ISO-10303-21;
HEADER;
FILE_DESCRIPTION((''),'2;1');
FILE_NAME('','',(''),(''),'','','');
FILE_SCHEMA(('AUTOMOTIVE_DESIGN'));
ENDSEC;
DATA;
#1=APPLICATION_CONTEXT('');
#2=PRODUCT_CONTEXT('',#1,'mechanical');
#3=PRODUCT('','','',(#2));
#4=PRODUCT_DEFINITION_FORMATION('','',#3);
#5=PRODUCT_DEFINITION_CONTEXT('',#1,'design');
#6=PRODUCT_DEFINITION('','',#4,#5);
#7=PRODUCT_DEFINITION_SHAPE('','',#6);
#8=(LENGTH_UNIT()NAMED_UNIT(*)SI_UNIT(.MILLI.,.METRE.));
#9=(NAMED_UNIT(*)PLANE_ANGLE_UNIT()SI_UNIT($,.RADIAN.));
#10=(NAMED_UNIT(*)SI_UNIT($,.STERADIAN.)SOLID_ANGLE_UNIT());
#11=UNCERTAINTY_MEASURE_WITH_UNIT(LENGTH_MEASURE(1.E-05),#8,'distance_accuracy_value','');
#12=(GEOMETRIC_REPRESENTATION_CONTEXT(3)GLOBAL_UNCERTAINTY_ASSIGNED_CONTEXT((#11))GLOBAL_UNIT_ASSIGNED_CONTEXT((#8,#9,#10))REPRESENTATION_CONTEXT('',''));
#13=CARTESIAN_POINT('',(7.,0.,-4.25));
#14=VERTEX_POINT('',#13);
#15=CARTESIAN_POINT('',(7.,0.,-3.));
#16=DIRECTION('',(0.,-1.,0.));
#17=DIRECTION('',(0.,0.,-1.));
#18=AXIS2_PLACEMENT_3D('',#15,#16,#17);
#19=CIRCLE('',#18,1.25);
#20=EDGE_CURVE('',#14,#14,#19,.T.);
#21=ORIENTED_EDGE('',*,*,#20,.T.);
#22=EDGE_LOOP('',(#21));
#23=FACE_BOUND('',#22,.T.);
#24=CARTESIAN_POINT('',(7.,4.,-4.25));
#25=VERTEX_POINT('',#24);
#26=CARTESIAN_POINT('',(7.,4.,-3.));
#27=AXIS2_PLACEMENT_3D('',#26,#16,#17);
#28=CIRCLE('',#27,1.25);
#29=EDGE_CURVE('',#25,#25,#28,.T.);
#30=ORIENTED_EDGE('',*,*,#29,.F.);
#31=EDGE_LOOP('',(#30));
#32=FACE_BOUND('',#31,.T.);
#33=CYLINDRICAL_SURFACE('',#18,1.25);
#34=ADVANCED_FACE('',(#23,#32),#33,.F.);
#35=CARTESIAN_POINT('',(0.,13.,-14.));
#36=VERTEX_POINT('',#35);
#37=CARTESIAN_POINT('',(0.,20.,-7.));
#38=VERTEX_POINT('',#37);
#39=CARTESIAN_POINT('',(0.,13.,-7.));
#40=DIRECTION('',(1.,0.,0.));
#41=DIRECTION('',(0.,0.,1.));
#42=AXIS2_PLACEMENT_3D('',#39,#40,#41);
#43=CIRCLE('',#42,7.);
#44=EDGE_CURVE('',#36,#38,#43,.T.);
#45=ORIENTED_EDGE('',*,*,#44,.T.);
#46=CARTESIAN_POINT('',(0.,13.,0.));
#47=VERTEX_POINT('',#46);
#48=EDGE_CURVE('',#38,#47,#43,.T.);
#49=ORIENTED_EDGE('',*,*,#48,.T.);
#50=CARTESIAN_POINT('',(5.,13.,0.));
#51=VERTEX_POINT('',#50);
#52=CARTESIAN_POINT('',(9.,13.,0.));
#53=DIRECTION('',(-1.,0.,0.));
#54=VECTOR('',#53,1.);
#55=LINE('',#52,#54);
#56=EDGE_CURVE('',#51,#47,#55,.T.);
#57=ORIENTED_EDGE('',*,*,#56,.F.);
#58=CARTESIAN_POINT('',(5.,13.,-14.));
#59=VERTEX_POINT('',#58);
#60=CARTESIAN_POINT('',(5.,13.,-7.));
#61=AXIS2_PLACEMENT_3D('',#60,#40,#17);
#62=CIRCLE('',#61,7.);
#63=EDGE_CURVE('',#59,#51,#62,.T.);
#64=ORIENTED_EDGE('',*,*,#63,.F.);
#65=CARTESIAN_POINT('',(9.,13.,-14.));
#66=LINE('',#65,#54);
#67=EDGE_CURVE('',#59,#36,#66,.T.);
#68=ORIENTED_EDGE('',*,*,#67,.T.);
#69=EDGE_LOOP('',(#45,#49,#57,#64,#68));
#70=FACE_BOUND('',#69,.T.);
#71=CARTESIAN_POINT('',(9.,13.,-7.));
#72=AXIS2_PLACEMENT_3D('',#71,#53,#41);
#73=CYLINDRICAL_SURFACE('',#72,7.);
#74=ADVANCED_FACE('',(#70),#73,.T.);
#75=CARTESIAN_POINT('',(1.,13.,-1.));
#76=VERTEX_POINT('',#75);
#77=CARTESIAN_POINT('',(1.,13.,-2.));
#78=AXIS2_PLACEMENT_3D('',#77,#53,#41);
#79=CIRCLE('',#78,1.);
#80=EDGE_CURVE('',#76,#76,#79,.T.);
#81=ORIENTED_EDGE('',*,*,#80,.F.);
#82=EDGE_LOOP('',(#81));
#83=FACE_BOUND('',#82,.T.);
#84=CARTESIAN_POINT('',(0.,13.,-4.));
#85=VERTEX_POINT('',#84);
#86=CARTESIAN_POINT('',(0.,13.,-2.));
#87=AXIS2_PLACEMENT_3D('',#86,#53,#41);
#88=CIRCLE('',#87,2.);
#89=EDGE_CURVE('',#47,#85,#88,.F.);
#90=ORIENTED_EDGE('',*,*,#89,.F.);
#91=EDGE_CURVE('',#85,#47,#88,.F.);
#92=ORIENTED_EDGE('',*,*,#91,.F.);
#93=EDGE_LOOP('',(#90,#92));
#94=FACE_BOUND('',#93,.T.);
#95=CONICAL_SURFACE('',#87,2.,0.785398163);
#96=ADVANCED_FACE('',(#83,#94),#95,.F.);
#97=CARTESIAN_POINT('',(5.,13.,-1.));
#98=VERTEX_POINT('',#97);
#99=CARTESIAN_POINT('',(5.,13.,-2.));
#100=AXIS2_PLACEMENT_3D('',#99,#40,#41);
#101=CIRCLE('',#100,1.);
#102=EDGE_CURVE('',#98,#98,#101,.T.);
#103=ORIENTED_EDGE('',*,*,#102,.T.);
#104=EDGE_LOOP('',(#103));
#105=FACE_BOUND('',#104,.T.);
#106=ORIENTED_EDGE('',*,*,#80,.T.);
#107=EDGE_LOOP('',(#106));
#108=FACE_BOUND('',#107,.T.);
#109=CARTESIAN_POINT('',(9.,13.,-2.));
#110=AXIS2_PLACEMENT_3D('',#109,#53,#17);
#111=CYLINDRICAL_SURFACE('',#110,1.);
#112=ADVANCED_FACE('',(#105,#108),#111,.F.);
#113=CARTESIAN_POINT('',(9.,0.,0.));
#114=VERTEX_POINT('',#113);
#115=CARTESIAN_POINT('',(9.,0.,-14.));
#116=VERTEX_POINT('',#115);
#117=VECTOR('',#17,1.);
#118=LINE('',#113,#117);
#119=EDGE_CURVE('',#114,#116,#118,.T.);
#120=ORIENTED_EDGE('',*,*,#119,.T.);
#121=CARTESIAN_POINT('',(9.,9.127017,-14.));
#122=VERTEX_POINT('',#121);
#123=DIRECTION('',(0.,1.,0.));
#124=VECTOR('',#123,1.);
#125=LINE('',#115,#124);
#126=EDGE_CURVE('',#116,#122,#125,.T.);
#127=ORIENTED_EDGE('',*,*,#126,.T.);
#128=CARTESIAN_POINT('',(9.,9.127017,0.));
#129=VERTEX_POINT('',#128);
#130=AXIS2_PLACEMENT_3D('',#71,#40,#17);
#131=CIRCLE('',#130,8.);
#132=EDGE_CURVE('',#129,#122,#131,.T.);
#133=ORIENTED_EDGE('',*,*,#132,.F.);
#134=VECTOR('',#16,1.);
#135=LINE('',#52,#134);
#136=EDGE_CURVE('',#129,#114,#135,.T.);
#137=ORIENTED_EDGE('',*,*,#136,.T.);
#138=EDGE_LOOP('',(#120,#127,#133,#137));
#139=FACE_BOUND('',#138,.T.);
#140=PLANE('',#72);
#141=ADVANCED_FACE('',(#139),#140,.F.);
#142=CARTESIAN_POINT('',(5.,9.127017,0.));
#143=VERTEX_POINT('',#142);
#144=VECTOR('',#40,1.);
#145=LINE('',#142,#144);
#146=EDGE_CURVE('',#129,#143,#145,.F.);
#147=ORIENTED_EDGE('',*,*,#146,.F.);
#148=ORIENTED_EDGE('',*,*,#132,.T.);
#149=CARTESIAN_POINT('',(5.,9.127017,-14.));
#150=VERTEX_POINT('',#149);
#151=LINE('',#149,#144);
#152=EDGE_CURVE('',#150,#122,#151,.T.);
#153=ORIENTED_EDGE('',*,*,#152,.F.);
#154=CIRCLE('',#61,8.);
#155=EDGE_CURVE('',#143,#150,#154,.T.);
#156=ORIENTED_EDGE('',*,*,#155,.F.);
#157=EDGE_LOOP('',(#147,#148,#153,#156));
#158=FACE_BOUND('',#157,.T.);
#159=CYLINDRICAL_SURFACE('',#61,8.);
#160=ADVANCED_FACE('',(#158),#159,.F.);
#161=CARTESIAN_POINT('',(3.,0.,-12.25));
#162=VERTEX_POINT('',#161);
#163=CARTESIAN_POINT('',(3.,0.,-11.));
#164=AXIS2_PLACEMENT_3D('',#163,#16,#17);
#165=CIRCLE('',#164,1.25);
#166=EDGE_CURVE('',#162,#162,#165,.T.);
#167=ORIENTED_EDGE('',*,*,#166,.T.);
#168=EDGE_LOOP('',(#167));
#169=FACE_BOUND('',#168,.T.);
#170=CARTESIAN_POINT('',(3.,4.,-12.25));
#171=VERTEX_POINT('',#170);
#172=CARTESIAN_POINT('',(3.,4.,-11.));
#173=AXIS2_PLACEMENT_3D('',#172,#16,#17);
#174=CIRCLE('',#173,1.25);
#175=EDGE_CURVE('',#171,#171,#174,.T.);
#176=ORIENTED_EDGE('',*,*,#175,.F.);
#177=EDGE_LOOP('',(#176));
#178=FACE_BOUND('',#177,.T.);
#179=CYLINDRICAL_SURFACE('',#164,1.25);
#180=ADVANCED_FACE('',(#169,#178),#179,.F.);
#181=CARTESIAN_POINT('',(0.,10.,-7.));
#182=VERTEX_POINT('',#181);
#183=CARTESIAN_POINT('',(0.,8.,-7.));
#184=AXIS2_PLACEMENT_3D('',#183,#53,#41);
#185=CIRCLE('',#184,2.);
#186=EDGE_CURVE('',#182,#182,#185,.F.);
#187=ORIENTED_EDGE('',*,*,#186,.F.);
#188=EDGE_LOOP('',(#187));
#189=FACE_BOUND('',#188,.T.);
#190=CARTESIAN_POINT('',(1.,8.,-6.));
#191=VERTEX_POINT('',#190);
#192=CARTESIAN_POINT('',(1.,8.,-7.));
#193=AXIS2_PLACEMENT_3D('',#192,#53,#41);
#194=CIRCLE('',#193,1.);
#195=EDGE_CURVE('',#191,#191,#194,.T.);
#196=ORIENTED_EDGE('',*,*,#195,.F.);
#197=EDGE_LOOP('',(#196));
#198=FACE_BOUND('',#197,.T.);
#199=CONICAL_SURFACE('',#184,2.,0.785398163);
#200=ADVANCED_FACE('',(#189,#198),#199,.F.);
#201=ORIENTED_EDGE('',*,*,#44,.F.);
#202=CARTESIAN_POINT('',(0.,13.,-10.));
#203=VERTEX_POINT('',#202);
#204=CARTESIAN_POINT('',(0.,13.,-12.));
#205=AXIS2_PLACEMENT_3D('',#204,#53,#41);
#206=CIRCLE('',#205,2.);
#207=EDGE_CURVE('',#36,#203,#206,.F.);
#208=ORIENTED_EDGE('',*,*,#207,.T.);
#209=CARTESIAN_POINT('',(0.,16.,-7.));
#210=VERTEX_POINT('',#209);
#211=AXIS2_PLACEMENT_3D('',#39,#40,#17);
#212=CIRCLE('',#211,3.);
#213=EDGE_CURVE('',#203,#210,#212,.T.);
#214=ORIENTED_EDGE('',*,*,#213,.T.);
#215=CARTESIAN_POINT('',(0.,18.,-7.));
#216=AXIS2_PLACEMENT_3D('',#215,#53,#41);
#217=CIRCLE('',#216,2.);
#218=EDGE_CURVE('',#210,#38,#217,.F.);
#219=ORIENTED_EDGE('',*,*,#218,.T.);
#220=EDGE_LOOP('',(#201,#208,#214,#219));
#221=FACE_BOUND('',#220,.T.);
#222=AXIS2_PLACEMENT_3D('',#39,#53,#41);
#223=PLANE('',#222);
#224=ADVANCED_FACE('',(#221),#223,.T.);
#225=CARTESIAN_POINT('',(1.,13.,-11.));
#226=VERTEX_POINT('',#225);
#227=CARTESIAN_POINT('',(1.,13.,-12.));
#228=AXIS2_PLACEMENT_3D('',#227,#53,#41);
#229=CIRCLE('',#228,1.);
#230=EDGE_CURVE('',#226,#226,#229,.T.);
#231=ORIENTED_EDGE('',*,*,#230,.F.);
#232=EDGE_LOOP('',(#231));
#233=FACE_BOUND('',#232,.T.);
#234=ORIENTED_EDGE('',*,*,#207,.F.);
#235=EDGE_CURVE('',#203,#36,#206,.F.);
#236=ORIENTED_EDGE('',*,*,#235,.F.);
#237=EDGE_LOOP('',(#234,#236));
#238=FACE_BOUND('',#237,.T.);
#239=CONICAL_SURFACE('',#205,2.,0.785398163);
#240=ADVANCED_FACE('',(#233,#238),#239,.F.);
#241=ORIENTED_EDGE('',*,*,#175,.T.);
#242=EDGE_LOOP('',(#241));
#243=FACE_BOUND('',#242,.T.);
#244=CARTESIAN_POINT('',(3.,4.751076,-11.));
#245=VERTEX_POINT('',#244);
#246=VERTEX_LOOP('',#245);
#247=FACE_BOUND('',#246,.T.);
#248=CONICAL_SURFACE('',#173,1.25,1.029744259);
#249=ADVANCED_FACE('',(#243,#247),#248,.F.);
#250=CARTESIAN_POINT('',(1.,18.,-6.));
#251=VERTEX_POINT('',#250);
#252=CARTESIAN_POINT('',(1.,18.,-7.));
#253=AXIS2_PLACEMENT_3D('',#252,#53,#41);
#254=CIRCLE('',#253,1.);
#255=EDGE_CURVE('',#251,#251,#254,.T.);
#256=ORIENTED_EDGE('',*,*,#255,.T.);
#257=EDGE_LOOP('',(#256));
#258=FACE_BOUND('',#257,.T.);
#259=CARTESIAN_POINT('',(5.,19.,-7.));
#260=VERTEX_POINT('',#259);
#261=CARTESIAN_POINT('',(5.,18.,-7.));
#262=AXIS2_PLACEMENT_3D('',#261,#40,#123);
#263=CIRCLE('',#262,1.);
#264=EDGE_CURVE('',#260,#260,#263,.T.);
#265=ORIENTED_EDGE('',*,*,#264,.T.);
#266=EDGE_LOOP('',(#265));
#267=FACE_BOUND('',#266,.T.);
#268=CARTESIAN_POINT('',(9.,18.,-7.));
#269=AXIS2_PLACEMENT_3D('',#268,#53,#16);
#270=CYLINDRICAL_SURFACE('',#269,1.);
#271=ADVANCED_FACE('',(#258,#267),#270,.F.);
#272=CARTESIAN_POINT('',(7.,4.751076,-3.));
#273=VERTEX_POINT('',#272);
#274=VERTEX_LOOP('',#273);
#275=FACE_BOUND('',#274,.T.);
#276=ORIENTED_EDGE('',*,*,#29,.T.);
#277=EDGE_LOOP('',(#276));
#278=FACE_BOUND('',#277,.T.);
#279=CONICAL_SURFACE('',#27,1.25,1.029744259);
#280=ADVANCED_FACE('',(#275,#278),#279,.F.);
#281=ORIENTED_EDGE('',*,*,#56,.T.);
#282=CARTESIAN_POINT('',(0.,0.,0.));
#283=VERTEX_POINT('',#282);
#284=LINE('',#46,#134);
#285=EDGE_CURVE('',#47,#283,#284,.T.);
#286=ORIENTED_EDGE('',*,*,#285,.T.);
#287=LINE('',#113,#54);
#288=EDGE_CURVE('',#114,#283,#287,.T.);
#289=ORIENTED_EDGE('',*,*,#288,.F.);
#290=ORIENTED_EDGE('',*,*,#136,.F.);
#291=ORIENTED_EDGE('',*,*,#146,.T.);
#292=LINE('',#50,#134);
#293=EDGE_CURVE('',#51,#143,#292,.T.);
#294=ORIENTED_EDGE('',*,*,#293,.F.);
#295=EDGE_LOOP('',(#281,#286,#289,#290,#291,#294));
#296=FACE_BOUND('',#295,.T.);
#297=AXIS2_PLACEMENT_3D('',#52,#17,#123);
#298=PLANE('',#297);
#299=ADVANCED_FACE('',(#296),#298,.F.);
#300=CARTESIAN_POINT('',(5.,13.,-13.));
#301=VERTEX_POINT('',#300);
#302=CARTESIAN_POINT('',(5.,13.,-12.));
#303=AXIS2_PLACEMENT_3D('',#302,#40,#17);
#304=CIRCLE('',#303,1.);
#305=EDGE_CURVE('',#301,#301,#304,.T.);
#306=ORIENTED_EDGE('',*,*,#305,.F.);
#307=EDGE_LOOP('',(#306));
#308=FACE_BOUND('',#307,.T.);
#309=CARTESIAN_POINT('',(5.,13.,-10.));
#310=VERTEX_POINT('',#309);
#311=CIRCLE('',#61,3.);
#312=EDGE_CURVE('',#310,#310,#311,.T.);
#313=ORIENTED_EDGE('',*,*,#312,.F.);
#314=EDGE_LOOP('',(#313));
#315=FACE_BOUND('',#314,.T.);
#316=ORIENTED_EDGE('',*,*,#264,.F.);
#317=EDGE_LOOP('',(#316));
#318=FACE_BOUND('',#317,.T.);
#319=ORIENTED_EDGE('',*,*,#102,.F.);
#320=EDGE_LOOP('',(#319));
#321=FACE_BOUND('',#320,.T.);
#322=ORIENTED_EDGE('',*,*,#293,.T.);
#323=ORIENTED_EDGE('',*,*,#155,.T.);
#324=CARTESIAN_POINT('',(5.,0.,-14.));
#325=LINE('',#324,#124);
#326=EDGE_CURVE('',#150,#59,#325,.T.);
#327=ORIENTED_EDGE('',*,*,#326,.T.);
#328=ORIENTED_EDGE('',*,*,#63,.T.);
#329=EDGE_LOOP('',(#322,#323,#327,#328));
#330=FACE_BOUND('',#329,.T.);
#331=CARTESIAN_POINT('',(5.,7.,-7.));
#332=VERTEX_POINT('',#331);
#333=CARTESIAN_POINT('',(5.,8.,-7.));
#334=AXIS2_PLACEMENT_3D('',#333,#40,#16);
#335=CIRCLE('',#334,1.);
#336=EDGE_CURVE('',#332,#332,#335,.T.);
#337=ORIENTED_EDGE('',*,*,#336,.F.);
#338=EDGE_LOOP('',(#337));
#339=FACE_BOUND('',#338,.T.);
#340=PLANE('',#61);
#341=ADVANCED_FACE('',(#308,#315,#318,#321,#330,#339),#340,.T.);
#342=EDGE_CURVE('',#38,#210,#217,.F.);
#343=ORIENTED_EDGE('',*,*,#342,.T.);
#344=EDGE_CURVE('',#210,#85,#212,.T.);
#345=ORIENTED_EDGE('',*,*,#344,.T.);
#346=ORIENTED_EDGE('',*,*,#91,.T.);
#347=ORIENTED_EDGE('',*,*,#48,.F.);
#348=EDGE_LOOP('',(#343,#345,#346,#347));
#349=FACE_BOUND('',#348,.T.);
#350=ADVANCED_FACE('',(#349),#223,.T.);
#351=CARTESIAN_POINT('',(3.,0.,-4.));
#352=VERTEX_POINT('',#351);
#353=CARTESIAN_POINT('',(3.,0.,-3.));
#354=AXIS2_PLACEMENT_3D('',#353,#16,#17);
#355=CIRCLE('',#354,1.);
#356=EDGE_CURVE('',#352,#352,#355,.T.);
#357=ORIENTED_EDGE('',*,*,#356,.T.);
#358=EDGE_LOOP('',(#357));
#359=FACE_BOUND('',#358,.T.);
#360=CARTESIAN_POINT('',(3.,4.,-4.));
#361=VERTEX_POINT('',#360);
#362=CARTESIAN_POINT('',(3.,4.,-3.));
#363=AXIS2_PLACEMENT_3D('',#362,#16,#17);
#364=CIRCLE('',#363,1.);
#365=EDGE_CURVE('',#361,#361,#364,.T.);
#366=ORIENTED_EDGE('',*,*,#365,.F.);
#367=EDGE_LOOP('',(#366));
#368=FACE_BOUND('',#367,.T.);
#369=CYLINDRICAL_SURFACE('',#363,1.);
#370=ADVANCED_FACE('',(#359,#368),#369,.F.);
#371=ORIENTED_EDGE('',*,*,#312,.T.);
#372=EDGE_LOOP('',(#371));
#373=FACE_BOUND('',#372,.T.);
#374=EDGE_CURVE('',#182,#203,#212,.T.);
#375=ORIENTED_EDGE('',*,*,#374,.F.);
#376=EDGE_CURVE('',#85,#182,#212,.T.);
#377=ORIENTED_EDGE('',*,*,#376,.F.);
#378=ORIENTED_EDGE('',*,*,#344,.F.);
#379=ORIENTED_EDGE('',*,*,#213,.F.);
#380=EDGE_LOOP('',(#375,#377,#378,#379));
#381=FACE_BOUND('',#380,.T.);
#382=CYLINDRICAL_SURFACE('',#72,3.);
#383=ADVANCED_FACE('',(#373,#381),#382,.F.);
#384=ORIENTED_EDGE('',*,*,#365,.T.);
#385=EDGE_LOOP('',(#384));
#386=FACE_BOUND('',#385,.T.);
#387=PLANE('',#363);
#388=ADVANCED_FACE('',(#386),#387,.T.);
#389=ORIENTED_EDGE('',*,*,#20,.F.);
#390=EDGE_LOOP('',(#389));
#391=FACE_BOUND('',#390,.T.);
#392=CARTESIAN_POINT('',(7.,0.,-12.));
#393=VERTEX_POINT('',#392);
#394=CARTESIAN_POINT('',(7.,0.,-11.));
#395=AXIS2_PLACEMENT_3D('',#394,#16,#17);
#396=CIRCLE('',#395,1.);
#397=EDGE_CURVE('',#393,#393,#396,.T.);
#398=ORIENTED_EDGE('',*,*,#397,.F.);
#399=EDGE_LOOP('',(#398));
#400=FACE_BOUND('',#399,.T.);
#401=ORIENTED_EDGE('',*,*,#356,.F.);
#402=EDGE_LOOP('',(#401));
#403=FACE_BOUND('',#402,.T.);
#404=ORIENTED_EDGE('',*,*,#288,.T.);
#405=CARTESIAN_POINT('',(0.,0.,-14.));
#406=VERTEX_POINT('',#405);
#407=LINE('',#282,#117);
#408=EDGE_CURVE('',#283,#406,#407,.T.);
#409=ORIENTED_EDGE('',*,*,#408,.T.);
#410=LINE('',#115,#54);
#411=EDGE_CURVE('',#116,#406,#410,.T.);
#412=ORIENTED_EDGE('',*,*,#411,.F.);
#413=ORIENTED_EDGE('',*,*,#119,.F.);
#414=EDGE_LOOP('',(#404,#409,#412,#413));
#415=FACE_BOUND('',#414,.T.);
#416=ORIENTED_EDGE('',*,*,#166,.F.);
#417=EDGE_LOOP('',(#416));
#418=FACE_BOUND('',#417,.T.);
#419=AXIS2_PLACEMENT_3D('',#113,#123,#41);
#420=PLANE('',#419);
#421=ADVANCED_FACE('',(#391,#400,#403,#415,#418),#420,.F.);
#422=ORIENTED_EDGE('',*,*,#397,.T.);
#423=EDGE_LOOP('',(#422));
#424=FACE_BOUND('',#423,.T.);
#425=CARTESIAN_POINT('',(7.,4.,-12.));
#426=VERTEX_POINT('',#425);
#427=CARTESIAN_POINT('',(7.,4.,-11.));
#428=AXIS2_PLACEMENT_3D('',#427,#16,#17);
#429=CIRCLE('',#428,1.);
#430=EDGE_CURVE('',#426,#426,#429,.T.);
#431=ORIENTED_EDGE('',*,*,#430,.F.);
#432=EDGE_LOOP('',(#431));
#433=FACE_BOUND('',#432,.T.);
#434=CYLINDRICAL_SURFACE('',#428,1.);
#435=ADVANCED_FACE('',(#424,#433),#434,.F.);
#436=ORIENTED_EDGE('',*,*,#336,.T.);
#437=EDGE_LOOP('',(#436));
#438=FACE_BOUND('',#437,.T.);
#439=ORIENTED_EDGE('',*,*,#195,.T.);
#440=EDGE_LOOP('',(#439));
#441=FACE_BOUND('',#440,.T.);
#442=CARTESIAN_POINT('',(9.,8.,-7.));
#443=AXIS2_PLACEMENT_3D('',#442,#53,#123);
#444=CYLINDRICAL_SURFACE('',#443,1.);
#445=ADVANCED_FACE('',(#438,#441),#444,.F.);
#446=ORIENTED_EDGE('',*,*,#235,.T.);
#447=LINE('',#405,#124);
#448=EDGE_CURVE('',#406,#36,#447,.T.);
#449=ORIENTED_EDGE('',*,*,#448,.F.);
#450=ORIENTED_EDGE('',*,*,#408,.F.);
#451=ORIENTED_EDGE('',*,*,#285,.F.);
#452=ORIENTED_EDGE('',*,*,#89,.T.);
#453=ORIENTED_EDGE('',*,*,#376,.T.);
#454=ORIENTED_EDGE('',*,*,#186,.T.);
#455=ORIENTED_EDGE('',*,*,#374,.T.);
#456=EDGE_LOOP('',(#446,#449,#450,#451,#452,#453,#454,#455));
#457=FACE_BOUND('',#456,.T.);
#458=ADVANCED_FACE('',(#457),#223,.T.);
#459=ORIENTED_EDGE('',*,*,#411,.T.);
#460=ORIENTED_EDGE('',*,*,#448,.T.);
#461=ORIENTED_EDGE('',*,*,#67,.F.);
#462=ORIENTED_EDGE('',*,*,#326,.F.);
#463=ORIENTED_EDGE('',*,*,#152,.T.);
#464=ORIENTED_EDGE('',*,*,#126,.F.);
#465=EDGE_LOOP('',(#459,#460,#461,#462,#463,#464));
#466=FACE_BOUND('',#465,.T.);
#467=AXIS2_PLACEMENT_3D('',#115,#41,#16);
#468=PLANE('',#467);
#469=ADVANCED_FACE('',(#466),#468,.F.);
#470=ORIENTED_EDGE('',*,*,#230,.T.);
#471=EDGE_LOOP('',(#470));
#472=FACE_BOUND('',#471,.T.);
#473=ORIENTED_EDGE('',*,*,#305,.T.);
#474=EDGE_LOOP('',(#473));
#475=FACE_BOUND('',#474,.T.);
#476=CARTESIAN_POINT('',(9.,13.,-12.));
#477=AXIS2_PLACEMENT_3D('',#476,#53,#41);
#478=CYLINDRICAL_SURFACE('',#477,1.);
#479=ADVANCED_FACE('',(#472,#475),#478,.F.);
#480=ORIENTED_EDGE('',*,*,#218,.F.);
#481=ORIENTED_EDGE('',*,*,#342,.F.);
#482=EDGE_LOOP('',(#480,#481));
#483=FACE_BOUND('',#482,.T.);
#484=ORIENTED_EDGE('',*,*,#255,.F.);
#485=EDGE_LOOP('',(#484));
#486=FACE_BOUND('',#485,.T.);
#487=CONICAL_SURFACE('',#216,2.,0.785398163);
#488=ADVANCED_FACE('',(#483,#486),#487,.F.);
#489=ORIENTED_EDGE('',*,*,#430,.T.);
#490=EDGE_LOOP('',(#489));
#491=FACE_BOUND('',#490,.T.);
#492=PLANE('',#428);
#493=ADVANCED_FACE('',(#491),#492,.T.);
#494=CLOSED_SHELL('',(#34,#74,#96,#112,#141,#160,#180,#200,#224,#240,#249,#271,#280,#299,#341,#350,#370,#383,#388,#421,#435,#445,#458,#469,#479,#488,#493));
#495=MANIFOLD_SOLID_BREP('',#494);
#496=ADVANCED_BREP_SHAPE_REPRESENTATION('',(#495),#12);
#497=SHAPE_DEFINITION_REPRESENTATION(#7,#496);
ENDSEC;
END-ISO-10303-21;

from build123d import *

# Parameters (mm, degrees)
SKETCH1_R                       = 3
SKETCH1_R_2                     = 1
BOSS_EXTRUDE1_DEPTH             = 9
SKETCH2_R                       = 8
CUT_EXTRUDE1_DEPTH              = 4
CIRPATTERN1_OUTLINE_R           = 1
CIRPATTERN1_DEPTH               = 5
TAP_DRILL_FOR_M3X0_5_TAP1_D     = 2.5
TAP_DRILL_FOR_M3X0_5_TAP1_DEPTH = 4
TAP_DRILL_FOR_M3X0_5_TAP1_TIP   = 0.751075774
SKETCH5_R                       = 1
CUT_EXTRUDE2_DEPTH              = 4
CHAMFER1_SIZE                   = 1


# Read off the part's stored shape, not the designer's step: CirPattern1
with BuildPart() as part:
    # Sketch1 → Boss-Extrude1 (new body)
    with BuildSketch(Plane(origin=(0, 0, 0), x_dir=(0, 0, -1), z_dir=(1, 0, 0))):
        with BuildLine():
            Line((0, 13), (0, 0))
            Line((0, 0), (14, 0))
            Line((14, 0), (14, 13))
            ThreePointArc((14, 13), (7, 20), (0, 13))
        make_face()
        with Locations((7, 13)):
            Circle(SKETCH1_R, mode=Mode.SUBTRACT)
        with Locations((12, 13)):
            Circle(SKETCH1_R_2, mode=Mode.SUBTRACT)
    extrude(amount=BOSS_EXTRUDE1_DEPTH)

    # Sketch2 → Cut-Extrude1 (cut)
    with BuildSketch(Plane(origin=(9, 0, 0), x_dir=(0, 0, -1), z_dir=(1, 0, 0))):
        with Locations((7, 13)):
            Circle(SKETCH2_R)
    extrude(amount=-CUT_EXTRUDE1_DEPTH, mode=Mode.SUBTRACT)

    # CirPattern1 outline → CirPattern1 (cut)
    with BuildSketch(Plane.YZ):
        with Locations((8, -7)):
            Circle(CIRPATTERN1_OUTLINE_R)
        with Locations((13, -2)):
            Circle(CIRPATTERN1_OUTLINE_R)
        with Locations((18, -7)):
            Circle(CIRPATTERN1_OUTLINE_R)
    extrude(amount=CIRPATTERN1_DEPTH, mode=Mode.SUBTRACT)

    # Tap Drill for M3x0.5 Tap1
    with Locations(Plane(origin=(0, 0, 0), x_dir=(-1, 0, 0), z_dir=(0, -1, 0))):
        with Locations((-3, 11), (-7, 3)):
            Hole(TAP_DRILL_FOR_M3X0_5_TAP1_D / 2, depth=TAP_DRILL_FOR_M3X0_5_TAP1_DEPTH)
            with Locations((0, 0, -(TAP_DRILL_FOR_M3X0_5_TAP1_DEPTH + TAP_DRILL_FOR_M3X0_5_TAP1_TIP / 2))):  # 118° drill point
                Cone(0, TAP_DRILL_FOR_M3X0_5_TAP1_D / 2, TAP_DRILL_FOR_M3X0_5_TAP1_TIP, mode=Mode.SUBTRACT)

    # Sketch5 → Cut-Extrude2 (cut)
    with BuildSketch(Plane.XZ):
        with Locations(Location((3, -3, 0), (0, 0, 270))):
            Circle(SKETCH5_R)
        with Locations(Location((7, -11, 0), (0, 0, 270))):
            Circle(SKETCH5_R)
    extrude(amount=-CUT_EXTRUDE2_DEPTH, mode=Mode.SUBTRACT)

    # Chamfer1
    chamfer1_edges = [part.edges().sort_by_distance(p)[0] for p in [
        (0, 13, -11),
        (0, 17, -7),
        (0, 12, -2),
        (0, 7, -7),
    ]]
    chamfer(chamfer1_edges, length=CHAMFER1_SIZE - 0.0001)  # a hair under: the kernel refuses the full size


solid = part.part
